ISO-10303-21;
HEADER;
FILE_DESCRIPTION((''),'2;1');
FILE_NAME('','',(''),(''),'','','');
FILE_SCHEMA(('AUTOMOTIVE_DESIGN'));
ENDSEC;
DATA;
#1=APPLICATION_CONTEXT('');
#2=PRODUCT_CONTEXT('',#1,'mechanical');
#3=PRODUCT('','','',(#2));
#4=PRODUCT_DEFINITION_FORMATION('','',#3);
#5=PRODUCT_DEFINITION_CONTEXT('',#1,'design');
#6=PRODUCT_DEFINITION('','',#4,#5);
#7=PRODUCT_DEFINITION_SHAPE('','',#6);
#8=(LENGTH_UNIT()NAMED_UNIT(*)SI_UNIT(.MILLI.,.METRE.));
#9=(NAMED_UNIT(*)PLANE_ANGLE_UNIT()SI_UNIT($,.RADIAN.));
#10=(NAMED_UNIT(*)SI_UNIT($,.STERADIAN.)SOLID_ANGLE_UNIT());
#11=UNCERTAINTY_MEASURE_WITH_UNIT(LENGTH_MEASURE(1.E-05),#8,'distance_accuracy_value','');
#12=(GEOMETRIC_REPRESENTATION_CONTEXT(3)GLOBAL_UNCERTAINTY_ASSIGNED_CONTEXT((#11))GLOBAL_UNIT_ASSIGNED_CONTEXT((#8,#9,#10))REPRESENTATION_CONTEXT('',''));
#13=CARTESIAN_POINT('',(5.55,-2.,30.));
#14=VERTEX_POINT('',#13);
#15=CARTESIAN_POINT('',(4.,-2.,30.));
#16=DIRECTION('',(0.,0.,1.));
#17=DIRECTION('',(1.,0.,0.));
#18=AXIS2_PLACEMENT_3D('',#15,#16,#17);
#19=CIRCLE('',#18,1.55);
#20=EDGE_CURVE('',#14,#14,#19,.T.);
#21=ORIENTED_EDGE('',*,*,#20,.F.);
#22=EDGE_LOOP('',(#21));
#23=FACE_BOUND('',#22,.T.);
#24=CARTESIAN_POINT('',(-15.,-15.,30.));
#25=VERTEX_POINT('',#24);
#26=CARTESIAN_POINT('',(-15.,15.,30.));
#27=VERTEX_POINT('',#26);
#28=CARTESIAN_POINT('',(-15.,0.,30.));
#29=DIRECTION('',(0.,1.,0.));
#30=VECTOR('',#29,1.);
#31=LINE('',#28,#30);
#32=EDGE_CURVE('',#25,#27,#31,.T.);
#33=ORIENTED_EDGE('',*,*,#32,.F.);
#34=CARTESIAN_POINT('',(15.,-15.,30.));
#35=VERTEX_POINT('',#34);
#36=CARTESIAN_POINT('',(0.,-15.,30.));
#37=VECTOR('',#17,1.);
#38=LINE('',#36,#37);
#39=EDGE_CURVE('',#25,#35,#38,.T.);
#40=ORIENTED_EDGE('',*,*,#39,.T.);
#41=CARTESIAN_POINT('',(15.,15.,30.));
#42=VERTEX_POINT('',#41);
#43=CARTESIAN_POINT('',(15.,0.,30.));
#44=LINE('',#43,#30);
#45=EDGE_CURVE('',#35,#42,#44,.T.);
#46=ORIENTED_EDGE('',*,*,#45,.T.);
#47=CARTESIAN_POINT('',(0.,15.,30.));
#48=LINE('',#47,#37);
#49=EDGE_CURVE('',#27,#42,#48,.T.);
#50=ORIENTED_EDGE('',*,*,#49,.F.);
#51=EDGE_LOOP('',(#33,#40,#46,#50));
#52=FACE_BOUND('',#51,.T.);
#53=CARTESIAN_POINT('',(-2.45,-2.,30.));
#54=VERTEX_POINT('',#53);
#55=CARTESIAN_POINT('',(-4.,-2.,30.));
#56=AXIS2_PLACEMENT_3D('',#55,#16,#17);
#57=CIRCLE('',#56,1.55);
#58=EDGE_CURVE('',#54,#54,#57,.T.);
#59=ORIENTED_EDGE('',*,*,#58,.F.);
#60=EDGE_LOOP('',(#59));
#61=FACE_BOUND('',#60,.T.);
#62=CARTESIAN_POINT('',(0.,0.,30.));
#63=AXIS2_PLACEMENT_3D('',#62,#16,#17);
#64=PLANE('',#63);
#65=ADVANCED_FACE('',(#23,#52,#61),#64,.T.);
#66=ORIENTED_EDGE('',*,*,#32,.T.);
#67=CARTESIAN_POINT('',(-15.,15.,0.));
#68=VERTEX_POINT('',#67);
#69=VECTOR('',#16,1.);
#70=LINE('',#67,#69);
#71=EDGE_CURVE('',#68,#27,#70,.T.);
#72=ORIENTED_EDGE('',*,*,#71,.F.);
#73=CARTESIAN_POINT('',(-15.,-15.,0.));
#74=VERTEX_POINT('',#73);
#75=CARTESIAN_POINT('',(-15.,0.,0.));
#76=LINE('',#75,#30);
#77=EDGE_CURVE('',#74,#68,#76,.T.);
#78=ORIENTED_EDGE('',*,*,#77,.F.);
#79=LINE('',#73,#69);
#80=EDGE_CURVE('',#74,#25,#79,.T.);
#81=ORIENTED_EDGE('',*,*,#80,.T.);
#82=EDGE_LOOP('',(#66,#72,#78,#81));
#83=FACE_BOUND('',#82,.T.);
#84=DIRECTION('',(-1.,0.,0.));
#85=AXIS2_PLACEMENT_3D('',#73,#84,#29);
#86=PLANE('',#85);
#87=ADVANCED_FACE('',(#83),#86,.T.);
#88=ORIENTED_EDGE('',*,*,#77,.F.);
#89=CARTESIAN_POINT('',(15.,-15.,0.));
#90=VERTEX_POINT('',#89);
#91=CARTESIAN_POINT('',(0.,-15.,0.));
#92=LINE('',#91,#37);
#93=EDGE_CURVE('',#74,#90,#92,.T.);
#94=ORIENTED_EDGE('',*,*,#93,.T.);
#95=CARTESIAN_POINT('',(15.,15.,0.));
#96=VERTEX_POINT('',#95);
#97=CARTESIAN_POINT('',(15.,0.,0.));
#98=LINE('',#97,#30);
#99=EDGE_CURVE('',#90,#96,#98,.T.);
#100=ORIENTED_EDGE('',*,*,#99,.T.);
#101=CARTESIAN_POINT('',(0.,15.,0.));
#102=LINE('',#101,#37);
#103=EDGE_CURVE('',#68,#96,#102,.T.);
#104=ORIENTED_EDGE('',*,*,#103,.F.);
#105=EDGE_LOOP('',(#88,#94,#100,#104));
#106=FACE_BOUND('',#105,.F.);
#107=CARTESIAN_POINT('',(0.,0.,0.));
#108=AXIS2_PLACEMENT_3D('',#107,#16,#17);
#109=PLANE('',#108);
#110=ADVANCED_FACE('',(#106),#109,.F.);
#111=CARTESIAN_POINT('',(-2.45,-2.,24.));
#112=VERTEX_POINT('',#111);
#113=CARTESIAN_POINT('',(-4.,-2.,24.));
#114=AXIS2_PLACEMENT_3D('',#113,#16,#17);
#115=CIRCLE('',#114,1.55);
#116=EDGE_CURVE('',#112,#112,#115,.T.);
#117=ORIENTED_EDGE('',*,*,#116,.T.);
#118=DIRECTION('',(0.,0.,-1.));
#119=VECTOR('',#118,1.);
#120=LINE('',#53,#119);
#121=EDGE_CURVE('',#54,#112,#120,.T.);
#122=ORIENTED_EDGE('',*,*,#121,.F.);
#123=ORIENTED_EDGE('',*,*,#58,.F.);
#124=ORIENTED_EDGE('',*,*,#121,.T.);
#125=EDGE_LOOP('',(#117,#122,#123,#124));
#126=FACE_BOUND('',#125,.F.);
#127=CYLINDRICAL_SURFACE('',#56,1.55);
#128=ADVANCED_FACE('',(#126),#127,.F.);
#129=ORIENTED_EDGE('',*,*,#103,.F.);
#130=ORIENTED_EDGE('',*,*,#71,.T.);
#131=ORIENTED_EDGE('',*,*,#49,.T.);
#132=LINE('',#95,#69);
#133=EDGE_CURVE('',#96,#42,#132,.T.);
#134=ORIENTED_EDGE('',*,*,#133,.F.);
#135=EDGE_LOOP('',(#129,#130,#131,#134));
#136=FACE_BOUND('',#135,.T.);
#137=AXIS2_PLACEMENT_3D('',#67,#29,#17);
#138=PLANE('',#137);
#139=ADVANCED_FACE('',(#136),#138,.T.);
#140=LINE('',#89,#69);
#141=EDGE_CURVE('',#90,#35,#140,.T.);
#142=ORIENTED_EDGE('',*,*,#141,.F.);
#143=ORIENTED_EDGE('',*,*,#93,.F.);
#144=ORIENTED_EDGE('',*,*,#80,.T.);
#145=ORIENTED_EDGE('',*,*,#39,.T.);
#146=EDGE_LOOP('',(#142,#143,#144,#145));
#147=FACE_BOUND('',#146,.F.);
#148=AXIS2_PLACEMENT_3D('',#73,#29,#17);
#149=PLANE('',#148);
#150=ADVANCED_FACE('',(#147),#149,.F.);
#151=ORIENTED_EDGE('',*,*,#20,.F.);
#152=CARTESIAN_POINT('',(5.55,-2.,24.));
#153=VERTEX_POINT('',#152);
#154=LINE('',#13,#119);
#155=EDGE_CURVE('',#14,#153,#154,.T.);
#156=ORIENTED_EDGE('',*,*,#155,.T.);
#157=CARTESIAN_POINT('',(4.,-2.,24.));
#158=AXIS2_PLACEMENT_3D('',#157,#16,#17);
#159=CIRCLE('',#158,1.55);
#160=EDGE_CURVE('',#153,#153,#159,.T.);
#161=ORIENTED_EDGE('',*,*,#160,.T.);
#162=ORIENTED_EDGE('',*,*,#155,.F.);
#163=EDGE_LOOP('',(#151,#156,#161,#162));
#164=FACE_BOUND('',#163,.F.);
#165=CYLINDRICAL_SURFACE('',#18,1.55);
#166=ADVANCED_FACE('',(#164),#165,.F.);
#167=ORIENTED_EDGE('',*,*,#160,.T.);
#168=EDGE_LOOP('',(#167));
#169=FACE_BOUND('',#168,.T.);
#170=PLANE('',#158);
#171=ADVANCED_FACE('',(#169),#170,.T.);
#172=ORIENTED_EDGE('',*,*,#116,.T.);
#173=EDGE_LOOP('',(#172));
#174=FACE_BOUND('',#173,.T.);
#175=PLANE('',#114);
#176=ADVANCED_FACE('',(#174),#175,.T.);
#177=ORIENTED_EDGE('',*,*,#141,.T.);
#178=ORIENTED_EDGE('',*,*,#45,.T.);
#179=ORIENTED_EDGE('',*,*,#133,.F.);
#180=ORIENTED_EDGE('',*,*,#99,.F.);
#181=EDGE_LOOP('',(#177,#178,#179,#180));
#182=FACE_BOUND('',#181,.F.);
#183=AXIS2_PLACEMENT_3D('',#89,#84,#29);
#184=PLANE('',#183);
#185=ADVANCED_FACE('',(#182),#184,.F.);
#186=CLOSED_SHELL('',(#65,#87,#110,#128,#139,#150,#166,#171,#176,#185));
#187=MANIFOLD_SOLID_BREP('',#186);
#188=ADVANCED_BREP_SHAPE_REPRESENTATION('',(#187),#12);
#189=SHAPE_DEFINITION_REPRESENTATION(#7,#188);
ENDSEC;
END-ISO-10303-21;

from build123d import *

# Parameters (mm, degrees)
F0_W     = 30
F0_H     = 30
F1_DEPTH = 30
F2_R     = 1.55
F3_DEPTH = 6


# Not quite as in the source:
# - a feature names something its author has since deleted; it is built from what else it names


with BuildPart() as f1:
    # F0 (on Top) → F1 (new body)
    with BuildSketch(Plane.XY):
        Rectangle(F0_W, F0_H)
    extrude(amount=F1_DEPTH)

    # F2 (on face) → F3 (cut)
    with BuildSketch(Plane.XY.offset(30)):
        with Locations((-4, -2)):
            Circle(F2_R)
        with Locations((4, -2)):
            Circle(F2_R)
    extrude(amount=-F3_DEPTH, mode=Mode.SUBTRACT)


solid = f1.part
